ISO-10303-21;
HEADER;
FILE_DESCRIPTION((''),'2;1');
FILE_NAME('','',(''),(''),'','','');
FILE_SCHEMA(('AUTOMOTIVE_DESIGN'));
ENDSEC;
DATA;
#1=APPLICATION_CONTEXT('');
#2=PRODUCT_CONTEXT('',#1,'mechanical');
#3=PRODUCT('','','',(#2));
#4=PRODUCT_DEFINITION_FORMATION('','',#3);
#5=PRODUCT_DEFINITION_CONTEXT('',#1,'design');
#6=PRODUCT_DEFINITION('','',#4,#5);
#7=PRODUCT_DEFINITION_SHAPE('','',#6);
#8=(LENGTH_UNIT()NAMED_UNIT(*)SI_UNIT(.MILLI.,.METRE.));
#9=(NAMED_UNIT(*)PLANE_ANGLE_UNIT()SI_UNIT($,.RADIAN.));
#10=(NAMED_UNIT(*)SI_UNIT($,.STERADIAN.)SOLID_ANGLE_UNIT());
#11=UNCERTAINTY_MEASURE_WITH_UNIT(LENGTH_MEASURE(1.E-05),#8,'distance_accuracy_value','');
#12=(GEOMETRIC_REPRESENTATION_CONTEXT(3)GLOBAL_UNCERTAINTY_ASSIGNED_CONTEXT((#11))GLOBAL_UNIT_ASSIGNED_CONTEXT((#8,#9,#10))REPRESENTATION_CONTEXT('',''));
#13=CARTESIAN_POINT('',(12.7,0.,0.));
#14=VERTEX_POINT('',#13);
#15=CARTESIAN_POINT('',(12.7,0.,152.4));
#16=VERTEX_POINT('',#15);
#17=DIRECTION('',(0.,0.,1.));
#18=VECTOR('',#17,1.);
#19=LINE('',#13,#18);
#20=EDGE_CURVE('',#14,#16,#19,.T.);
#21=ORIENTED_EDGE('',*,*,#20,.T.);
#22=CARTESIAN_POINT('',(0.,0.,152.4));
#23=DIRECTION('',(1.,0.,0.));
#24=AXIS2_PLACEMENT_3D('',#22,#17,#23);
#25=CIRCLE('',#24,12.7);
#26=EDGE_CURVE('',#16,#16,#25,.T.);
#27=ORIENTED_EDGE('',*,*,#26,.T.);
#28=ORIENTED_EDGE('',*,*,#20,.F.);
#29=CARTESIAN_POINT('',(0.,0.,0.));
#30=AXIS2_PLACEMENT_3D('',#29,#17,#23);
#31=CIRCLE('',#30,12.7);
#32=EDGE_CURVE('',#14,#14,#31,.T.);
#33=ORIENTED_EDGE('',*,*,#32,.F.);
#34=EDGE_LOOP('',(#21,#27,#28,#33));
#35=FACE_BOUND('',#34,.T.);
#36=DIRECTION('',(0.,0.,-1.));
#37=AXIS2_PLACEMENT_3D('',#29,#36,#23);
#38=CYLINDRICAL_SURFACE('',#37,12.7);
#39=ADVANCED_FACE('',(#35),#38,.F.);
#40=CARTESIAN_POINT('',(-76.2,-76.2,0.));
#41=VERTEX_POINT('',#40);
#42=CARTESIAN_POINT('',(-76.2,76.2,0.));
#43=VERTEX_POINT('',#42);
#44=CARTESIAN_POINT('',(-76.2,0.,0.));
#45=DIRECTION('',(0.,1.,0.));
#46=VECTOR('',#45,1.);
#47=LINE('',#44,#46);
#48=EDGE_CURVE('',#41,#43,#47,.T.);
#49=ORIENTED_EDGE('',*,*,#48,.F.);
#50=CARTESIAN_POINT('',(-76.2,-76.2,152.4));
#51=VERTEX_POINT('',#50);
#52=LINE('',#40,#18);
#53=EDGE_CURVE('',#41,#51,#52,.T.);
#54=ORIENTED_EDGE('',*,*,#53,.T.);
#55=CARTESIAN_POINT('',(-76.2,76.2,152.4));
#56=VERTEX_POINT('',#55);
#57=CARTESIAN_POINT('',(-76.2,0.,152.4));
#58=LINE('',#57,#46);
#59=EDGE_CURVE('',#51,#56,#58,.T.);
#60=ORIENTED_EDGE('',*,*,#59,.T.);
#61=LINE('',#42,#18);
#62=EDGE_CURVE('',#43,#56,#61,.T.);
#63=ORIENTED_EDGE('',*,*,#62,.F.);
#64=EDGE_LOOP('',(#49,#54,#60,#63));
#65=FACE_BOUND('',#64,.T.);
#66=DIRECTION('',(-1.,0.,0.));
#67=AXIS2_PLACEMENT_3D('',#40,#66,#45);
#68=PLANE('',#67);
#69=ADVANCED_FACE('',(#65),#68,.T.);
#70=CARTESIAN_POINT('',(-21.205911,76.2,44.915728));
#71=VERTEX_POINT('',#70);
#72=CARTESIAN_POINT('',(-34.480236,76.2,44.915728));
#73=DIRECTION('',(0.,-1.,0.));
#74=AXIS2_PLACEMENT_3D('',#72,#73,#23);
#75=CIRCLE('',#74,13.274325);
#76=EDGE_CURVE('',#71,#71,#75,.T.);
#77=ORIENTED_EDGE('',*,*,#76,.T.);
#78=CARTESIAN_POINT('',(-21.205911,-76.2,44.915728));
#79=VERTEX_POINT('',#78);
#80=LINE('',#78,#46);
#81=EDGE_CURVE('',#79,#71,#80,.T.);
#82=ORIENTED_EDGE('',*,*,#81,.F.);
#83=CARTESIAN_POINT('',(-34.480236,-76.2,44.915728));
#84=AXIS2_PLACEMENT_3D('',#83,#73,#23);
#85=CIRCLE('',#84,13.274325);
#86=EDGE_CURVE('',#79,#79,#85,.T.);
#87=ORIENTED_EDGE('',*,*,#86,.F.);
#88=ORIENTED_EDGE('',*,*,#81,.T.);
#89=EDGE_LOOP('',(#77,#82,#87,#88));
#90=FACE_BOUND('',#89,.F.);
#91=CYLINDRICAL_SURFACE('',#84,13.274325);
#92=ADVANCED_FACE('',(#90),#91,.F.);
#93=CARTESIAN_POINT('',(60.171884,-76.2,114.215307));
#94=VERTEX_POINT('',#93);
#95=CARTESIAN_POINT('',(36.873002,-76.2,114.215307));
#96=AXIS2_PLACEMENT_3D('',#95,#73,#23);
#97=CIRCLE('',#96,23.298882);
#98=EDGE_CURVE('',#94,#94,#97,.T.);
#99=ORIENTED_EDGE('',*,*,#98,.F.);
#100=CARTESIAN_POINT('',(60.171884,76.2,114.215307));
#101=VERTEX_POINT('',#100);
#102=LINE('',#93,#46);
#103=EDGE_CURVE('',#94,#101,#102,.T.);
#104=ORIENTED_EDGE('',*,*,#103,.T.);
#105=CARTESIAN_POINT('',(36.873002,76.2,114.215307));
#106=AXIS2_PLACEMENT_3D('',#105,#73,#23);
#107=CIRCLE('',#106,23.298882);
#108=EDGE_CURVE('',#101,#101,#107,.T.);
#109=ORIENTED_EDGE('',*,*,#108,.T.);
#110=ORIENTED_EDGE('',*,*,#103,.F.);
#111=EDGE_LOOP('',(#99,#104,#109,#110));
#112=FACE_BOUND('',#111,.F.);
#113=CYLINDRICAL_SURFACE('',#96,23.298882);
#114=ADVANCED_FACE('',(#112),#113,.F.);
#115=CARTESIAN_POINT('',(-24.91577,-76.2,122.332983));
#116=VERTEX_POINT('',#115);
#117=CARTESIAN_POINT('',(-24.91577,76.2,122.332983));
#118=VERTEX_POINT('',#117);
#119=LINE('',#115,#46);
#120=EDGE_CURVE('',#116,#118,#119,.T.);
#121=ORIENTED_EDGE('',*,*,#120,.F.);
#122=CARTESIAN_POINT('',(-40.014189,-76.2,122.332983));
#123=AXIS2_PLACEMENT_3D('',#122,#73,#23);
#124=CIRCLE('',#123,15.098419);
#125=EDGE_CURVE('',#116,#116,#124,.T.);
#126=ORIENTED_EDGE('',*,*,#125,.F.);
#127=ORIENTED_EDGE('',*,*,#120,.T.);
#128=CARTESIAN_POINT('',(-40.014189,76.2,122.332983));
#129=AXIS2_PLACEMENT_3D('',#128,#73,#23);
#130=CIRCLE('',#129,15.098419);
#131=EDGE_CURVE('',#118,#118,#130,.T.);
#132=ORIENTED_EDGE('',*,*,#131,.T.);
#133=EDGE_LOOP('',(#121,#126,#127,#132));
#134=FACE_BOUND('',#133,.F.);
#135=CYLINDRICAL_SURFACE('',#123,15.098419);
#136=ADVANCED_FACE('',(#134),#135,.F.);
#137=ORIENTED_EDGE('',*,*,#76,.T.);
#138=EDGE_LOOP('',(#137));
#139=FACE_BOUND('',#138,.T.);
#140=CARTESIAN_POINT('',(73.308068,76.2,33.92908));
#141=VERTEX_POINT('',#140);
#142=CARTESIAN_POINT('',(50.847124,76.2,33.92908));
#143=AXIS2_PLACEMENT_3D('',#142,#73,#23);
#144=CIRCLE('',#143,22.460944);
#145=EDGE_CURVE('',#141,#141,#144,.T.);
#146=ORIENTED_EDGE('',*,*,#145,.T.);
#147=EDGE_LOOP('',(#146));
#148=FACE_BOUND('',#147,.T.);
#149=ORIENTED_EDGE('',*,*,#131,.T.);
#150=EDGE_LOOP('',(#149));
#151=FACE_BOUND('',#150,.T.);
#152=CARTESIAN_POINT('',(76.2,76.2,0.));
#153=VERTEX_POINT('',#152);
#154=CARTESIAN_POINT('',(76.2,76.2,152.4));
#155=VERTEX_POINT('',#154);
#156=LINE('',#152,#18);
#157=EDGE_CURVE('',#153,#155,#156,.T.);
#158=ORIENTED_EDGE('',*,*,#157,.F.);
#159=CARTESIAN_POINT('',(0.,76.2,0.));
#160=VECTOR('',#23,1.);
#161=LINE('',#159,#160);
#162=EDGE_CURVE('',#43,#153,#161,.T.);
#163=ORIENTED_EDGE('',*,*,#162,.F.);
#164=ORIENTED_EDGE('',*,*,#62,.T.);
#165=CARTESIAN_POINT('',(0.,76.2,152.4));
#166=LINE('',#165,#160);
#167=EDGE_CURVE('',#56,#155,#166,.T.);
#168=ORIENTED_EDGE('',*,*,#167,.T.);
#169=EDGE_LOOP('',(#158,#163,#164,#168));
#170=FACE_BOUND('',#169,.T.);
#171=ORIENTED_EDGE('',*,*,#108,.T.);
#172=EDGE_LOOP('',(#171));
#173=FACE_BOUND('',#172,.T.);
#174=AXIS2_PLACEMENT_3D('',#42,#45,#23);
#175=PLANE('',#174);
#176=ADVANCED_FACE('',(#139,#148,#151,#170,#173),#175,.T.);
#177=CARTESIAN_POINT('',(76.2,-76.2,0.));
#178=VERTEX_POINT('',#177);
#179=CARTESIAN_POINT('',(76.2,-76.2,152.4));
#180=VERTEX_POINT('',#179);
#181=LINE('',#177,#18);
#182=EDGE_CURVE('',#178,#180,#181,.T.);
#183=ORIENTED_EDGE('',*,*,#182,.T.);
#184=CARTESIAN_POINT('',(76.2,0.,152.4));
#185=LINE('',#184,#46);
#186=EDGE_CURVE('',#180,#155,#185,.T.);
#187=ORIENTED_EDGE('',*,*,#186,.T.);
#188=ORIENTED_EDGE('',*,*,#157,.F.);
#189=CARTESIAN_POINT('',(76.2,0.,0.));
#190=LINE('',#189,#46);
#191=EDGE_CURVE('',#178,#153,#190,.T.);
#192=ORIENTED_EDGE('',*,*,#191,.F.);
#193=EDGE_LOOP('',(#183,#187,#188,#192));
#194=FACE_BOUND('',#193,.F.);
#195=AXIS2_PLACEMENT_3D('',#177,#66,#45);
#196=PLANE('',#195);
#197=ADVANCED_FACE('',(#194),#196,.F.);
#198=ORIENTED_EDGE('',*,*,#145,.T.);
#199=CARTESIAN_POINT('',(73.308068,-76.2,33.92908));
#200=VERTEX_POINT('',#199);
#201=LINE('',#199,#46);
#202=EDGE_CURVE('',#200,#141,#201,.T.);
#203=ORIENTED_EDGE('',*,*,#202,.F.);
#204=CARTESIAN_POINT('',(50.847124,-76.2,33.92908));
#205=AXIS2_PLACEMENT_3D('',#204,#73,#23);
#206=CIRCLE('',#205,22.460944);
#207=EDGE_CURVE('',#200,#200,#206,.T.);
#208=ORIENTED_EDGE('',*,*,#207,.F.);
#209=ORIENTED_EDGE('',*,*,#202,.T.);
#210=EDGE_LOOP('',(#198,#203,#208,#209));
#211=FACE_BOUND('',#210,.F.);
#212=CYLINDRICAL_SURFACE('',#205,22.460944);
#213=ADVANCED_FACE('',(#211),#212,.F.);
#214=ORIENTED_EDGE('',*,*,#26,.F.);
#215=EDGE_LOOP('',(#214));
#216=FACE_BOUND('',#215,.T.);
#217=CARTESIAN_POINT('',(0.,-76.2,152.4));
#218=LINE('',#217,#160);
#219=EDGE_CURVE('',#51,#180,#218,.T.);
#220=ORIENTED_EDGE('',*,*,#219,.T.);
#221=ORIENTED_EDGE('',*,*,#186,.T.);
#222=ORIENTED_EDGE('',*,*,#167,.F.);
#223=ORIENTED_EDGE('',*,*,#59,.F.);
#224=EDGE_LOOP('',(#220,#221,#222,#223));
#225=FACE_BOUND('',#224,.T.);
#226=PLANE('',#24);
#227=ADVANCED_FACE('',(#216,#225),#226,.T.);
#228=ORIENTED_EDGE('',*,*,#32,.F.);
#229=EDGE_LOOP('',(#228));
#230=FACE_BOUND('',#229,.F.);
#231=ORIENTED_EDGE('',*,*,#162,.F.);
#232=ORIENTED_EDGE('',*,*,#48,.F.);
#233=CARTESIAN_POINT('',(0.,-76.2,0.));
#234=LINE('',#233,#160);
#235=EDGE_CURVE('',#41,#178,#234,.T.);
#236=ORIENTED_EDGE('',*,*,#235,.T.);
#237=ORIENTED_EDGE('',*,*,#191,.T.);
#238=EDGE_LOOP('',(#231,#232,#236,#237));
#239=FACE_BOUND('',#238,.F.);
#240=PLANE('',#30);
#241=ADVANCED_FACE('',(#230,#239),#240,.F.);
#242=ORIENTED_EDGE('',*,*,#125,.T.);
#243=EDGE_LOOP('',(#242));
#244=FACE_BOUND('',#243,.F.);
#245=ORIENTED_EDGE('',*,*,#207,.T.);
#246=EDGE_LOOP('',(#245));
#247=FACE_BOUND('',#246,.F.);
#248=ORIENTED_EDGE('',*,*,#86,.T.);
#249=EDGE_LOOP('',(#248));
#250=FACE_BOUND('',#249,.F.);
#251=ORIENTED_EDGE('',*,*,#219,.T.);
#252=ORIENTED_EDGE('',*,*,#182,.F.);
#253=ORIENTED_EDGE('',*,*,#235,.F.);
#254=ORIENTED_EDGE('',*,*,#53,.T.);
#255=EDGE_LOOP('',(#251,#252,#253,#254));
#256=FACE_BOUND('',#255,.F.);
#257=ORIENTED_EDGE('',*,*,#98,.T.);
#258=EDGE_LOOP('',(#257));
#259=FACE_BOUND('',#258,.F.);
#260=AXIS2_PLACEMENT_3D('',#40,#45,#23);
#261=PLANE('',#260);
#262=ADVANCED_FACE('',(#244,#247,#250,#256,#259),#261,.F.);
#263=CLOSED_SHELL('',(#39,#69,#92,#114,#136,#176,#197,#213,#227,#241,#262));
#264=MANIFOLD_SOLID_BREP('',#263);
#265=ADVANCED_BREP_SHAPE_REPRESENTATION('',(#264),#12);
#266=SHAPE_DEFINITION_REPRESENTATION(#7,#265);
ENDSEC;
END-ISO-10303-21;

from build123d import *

# Parameters (mm, degrees)
F0_W     = 152.4
F0_H     = 152.4
F0_R     = 12.7
F1_DEPTH = 152.4
F2_R     = 15.0984188398
F2_R_2   = 23.2988824092
F2_R_3   = 22.4609439984
F2_R_4   = 13.2743249865
F3_DEPTH = 152.401


# Not quite as in the source:
# - the program builds the solid bodies; features that only make, move or delete a surface that nothing else refers to are left out


with BuildPart() as f1:
    # F0 (on Top) → F1 (new body)
    with BuildSketch(Plane.XY):
        Rectangle(F0_W, F0_H)
        Circle(F0_R, mode=Mode.SUBTRACT)
    extrude(amount=F1_DEPTH)

    # F2 (on face) → F3 (cut, through all)
    with BuildSketch(Plane.XZ.offset(76.2)):
        with Locations((-40.0141887367, 122.3329827189)):
            Circle(F2_R)
        with Locations((36.8730016053, 114.2153069377)):
            Circle(F2_R_2)
        with Locations((50.8471243083, 33.929079771)):
            Circle(F2_R_3)
        with Locations((-34.4802364707, 44.915728271)):
            Circle(F2_R_4)
    extrude(amount=-F3_DEPTH, mode=Mode.SUBTRACT)


solid = f1.part
